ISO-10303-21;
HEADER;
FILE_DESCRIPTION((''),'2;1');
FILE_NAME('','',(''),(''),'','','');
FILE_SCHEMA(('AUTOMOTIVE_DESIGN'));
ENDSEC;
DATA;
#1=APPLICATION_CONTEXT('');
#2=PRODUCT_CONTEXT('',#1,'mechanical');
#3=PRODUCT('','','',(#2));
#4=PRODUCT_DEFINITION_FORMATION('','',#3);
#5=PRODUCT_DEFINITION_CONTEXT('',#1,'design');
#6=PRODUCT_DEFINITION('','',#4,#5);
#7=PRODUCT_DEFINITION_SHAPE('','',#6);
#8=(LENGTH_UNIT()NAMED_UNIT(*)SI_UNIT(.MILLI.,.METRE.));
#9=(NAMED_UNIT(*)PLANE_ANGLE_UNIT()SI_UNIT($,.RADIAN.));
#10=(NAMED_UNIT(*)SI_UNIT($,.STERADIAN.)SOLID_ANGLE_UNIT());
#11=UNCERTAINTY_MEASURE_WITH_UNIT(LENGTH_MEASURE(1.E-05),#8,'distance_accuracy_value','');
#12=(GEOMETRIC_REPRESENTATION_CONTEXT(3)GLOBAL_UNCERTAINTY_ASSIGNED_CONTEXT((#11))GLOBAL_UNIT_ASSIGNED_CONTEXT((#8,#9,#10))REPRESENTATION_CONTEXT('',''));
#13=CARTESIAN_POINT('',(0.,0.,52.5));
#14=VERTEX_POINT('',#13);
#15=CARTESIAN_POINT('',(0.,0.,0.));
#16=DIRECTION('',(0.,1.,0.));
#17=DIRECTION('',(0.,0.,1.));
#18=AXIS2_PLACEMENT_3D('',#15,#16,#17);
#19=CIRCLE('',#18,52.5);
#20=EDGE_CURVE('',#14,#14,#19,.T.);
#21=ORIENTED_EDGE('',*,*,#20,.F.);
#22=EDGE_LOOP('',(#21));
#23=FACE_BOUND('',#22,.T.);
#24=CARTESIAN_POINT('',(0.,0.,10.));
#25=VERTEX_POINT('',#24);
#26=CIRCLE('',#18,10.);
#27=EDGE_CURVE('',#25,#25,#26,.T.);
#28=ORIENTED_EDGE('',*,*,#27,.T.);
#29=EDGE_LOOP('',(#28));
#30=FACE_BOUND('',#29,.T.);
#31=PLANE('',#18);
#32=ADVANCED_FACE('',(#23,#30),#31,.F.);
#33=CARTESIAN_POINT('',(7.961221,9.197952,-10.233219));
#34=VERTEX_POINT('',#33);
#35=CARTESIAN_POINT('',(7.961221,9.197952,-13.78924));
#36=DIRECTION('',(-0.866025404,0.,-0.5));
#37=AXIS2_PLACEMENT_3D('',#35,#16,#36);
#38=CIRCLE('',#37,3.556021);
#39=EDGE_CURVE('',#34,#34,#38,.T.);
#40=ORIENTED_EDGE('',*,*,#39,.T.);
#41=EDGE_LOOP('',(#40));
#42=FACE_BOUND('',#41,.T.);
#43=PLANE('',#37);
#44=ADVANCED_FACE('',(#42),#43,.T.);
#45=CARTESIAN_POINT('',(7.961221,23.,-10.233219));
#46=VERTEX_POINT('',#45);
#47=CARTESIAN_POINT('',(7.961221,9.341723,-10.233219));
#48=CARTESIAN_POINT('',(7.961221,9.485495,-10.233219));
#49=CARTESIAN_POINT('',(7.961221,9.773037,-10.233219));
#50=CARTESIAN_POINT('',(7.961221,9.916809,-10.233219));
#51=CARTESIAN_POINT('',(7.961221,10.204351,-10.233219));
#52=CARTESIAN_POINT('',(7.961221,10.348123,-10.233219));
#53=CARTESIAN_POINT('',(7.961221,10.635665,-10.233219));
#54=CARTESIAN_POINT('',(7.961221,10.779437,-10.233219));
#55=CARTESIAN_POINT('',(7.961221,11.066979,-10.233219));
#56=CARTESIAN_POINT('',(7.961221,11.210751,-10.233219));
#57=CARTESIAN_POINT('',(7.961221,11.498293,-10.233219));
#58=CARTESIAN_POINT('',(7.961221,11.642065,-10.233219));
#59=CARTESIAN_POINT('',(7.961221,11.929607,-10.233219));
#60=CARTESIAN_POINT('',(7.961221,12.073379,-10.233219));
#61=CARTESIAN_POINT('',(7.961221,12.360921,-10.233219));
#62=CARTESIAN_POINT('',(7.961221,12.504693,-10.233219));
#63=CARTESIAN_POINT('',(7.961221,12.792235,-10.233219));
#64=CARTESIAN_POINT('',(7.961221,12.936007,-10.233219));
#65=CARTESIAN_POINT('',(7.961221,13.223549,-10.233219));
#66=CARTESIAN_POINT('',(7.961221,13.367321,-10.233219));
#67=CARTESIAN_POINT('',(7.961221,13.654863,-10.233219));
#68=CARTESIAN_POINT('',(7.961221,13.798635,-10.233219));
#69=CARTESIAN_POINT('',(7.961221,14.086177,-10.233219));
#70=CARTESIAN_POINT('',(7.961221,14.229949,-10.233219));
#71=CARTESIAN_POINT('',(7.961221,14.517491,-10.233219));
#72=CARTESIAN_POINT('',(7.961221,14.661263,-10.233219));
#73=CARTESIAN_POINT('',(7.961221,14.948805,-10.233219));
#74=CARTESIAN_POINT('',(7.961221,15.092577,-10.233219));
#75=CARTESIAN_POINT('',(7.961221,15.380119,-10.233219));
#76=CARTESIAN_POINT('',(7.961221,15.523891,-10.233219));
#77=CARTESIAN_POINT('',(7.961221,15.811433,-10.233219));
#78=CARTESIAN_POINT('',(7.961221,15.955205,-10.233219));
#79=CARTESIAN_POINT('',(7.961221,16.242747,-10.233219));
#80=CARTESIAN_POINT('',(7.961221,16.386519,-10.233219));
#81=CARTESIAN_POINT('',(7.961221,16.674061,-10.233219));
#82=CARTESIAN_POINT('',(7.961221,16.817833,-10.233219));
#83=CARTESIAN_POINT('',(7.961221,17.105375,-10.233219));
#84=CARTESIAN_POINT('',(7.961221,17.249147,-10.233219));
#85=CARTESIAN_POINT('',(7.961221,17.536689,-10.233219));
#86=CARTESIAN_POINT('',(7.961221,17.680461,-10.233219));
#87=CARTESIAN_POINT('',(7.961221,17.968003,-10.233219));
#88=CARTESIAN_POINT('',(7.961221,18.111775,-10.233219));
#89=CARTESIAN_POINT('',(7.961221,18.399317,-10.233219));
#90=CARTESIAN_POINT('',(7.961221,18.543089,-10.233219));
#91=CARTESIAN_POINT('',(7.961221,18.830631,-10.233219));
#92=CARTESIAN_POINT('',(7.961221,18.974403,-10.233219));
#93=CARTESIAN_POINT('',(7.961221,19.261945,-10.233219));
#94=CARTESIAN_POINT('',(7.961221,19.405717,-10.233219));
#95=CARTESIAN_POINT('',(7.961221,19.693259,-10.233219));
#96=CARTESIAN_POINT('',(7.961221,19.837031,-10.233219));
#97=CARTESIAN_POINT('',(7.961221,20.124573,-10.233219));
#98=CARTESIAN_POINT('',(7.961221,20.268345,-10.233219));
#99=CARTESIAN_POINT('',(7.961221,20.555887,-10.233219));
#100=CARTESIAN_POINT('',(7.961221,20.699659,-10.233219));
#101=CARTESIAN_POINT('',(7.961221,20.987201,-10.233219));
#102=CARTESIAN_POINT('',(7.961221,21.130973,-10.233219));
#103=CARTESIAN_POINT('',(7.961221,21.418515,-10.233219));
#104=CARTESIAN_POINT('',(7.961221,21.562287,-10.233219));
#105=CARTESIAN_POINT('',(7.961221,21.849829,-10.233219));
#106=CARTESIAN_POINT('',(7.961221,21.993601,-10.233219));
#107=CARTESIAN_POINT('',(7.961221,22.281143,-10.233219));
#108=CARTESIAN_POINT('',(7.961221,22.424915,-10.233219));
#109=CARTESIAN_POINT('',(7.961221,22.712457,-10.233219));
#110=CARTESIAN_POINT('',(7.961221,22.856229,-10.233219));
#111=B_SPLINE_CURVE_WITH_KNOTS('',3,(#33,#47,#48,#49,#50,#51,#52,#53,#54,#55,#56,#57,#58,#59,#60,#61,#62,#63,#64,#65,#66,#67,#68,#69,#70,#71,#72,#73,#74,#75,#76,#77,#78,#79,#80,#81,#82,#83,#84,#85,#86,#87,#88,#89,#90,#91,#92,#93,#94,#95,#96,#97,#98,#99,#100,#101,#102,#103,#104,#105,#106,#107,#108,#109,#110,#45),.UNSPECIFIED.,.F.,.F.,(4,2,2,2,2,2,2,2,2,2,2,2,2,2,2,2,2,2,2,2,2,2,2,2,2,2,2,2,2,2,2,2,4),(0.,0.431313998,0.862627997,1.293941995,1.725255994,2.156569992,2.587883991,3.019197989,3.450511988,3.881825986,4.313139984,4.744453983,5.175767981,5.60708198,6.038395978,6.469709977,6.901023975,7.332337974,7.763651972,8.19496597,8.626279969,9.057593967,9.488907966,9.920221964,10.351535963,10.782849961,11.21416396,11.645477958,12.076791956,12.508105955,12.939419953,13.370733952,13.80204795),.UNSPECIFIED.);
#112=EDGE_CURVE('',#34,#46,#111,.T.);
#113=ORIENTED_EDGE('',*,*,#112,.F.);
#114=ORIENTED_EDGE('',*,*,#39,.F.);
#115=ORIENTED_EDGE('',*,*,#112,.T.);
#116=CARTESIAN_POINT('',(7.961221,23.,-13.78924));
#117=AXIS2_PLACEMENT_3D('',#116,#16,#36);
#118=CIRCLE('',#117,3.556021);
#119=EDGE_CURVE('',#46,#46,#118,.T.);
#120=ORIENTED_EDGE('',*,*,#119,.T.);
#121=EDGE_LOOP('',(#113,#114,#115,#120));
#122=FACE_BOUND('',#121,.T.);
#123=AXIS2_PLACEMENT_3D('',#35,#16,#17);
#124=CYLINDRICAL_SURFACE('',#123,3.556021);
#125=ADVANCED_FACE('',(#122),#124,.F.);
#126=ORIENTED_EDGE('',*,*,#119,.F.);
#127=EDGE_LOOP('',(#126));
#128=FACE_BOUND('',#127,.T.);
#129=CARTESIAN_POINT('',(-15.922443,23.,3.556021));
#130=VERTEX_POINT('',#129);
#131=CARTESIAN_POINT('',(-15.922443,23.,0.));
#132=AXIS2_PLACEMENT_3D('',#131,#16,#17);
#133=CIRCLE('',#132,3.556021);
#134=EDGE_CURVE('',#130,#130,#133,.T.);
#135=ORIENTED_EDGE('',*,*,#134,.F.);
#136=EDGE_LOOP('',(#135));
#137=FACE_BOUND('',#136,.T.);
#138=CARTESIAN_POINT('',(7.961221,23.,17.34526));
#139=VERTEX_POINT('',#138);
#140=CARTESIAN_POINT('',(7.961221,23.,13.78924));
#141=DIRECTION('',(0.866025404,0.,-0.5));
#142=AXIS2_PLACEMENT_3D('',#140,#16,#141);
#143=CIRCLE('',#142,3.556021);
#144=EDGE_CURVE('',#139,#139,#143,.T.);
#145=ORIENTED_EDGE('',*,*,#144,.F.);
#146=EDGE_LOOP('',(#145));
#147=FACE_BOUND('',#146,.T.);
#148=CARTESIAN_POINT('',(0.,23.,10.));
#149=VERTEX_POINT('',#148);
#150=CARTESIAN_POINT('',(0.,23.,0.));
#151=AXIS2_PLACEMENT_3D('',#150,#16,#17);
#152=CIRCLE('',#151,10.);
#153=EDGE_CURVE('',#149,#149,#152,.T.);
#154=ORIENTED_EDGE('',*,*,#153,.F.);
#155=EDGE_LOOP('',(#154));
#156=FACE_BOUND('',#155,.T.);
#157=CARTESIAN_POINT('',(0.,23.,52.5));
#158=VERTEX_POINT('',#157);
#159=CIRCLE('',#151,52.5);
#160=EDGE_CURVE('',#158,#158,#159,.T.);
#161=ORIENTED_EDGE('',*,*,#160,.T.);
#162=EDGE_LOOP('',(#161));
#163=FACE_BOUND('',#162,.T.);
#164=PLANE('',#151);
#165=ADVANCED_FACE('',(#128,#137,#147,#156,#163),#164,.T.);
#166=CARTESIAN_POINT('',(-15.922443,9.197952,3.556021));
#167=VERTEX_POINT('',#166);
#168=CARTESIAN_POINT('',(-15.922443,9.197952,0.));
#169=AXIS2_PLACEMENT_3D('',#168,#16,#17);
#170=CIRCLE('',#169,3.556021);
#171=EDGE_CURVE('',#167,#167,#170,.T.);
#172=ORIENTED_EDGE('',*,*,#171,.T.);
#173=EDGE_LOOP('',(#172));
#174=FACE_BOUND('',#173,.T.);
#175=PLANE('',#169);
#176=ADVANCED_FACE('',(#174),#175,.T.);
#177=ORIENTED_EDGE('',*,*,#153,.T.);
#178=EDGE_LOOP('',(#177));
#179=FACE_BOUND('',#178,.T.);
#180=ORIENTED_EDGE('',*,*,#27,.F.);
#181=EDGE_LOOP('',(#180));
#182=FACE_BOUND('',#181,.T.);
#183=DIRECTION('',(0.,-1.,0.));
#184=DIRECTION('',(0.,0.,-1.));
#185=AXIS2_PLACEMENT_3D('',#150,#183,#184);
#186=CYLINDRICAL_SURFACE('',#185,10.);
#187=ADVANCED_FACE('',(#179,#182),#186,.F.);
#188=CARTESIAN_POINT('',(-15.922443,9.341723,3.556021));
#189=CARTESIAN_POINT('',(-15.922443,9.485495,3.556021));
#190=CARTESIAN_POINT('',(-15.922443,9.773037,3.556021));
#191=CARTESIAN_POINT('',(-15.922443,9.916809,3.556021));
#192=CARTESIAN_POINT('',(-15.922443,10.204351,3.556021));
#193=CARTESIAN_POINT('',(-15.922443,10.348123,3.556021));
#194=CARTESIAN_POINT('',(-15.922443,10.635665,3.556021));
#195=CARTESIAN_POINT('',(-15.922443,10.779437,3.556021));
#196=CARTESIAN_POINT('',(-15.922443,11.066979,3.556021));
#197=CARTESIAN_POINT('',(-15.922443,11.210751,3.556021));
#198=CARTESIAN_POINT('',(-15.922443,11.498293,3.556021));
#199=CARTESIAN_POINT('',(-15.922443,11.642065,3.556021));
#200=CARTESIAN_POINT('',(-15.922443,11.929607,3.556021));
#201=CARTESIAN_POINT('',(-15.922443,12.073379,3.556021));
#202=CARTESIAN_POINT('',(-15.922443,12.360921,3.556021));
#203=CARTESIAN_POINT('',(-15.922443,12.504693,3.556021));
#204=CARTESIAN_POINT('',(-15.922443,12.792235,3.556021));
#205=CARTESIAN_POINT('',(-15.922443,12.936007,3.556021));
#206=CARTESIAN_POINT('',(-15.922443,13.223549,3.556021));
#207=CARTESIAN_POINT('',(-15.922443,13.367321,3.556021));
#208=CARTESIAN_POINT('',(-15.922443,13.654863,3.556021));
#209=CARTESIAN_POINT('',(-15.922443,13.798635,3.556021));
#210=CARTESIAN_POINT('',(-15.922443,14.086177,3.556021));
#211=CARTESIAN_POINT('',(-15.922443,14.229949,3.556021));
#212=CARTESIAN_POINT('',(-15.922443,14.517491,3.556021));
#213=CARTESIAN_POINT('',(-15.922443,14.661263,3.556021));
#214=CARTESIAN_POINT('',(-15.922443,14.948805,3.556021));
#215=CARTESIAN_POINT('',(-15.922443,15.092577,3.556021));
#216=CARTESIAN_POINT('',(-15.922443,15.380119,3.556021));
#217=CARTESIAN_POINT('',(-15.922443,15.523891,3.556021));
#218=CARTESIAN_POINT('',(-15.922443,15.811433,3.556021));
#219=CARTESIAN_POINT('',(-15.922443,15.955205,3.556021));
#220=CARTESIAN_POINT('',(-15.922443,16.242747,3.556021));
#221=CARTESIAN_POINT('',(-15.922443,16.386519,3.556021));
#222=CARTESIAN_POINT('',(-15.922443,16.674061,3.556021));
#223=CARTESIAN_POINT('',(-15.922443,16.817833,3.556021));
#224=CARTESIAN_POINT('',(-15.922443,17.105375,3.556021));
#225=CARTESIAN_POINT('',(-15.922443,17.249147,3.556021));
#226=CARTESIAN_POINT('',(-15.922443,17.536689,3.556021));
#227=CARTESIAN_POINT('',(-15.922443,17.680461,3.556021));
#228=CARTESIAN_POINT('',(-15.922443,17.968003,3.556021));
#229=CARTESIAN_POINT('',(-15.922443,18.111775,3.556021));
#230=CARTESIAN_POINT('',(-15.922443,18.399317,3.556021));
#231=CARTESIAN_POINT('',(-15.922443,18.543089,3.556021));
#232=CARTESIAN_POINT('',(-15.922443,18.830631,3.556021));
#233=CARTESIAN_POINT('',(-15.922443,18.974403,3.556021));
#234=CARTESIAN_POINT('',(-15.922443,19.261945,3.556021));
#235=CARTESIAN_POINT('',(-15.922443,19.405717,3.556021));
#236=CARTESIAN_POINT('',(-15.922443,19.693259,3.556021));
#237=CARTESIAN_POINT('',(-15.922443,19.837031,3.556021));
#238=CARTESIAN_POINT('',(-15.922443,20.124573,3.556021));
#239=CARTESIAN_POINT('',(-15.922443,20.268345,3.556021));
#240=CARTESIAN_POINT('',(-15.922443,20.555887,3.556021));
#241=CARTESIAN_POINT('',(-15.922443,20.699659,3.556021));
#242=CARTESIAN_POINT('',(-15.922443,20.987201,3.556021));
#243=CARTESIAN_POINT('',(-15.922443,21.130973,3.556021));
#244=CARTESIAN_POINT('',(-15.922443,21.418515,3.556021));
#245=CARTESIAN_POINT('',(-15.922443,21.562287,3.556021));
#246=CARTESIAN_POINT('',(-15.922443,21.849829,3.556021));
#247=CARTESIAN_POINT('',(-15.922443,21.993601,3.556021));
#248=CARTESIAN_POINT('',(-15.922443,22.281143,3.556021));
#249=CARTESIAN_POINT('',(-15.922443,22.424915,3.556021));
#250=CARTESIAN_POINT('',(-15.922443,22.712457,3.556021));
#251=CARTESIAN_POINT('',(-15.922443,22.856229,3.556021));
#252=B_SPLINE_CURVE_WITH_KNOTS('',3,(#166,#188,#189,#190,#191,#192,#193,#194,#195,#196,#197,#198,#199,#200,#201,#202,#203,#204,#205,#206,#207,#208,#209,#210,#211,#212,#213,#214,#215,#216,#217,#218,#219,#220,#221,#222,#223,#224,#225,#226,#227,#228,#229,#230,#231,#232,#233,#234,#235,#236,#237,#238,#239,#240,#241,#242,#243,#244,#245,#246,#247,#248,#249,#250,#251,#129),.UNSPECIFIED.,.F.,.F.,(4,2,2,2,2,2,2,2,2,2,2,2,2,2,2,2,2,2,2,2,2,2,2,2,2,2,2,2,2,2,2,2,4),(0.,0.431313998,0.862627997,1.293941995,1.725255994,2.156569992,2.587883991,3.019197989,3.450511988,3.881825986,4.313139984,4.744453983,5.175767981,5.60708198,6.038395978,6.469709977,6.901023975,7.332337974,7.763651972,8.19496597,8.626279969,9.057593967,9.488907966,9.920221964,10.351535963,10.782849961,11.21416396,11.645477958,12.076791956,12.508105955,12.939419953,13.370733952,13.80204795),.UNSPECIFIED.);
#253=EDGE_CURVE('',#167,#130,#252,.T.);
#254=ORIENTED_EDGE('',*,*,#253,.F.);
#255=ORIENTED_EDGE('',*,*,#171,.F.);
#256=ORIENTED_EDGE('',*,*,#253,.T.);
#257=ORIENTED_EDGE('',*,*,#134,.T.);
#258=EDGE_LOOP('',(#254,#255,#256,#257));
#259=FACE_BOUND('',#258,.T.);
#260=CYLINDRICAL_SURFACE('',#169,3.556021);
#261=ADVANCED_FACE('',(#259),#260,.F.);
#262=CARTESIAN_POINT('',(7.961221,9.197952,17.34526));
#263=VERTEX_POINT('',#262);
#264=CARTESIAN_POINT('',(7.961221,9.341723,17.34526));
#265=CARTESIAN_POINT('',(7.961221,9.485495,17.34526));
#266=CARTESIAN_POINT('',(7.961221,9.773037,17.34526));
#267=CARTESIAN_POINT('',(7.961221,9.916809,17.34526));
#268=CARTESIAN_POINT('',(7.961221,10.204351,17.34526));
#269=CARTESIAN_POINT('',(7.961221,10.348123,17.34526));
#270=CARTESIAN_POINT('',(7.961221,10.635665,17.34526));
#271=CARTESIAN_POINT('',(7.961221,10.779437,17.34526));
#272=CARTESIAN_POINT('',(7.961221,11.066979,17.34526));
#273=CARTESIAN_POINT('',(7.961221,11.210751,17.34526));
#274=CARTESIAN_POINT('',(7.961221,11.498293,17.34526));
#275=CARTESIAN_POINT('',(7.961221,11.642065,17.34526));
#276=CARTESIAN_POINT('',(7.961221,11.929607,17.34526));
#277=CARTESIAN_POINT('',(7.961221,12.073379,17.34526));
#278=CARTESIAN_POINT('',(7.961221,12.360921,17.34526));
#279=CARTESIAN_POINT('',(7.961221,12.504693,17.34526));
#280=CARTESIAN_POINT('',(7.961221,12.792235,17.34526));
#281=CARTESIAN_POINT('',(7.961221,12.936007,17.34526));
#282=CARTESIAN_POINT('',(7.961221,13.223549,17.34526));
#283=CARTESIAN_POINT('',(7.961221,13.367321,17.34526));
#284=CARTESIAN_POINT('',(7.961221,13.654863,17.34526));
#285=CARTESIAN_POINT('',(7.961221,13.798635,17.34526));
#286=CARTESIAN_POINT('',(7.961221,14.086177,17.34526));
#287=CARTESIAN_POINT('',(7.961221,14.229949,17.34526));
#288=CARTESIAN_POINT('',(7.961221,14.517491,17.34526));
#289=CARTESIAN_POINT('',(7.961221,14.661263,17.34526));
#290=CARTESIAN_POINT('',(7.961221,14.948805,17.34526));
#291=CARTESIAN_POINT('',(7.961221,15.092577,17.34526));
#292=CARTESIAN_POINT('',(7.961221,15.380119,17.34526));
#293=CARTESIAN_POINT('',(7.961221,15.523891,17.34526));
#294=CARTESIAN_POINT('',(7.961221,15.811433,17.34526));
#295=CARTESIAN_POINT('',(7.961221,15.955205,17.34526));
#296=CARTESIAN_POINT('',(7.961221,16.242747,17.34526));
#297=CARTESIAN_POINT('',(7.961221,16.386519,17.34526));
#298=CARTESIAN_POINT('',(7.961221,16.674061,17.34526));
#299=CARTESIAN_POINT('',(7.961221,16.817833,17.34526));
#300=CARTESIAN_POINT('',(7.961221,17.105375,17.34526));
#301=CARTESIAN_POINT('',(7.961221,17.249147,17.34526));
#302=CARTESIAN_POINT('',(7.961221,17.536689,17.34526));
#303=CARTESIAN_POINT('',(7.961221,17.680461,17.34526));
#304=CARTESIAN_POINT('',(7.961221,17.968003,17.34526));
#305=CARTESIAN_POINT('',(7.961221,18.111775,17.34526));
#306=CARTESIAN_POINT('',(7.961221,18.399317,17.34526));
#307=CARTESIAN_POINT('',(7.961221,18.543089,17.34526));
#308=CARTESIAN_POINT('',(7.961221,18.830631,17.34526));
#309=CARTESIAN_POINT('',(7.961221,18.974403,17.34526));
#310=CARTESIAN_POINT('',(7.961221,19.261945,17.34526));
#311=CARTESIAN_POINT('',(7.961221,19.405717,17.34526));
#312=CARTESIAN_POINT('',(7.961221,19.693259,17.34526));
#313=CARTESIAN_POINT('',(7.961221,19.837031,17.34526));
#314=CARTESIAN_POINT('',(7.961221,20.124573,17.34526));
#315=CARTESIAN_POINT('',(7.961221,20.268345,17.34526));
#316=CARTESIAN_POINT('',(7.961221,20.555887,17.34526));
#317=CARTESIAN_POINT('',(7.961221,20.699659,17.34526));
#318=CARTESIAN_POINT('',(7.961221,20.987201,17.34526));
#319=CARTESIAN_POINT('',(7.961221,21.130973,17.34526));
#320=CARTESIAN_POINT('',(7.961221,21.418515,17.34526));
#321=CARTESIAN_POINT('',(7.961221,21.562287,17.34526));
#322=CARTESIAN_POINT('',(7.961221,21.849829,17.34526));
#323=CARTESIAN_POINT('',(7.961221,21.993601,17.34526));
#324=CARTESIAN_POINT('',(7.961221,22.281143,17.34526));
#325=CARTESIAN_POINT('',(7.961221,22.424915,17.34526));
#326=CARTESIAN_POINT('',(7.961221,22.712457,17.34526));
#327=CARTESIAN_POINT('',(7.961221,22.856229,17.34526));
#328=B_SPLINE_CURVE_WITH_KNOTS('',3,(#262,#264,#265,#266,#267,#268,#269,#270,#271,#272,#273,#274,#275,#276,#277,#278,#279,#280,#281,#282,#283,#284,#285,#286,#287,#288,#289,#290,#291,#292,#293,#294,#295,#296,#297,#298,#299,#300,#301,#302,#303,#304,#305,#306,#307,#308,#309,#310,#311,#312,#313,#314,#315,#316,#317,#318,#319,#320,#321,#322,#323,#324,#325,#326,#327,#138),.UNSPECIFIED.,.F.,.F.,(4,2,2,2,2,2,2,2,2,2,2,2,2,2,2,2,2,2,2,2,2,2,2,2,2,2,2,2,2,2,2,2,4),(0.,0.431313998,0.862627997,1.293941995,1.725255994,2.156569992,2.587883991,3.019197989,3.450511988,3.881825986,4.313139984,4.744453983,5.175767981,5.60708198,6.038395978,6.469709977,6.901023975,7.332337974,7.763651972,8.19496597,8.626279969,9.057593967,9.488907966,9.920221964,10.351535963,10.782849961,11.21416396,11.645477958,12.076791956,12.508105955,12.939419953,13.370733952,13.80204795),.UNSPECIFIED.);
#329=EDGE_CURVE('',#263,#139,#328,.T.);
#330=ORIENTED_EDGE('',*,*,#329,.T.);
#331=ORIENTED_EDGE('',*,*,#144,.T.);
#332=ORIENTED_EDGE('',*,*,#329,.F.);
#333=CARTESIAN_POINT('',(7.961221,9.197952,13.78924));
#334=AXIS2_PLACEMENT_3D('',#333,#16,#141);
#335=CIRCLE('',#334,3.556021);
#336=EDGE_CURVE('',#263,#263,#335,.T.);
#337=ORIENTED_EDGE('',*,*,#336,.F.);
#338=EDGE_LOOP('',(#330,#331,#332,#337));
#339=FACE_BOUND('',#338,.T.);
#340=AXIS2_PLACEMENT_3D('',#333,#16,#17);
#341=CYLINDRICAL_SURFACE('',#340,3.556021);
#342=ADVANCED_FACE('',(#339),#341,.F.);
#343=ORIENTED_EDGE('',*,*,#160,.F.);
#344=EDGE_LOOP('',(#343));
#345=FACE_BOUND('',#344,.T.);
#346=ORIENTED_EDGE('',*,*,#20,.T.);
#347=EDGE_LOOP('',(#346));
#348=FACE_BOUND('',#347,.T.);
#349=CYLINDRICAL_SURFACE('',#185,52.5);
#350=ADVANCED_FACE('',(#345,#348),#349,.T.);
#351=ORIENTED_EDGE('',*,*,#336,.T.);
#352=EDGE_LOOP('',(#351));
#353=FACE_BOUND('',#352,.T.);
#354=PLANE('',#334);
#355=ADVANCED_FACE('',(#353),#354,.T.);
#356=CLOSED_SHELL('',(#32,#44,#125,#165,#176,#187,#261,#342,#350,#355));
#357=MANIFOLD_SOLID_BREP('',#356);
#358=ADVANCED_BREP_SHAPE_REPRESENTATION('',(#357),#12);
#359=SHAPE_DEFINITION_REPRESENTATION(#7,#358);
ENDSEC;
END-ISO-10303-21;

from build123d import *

# Parameters (mm, degrees)
SKETCH1_R           = 52.5
BOSS_EXTRUDE1_DEPTH = 23
SKETCH2_R           = 10
CUT_EXTRUDE1_DEPTH  = 78.727086656
SKETCH3_R           = 3.556020506
CUT_EXTRUDE2_DEPTH  = 13.80204795
CIRPATTERN1_COUNT   = 3


with BuildPart() as part:
    # Sketch1 → Boss-Extrude1 (new body)
    with BuildSketch(Plane(origin=(0, 0, 0), x_dir=(1, 0, 0), z_dir=(0, 1, 0))):
        Circle(SKETCH1_R)
    extrude(amount=BOSS_EXTRUDE1_DEPTH)

    # Sketch2 → Cut-Extrude1 (cut, through all)
    with BuildSketch(Plane(origin=(0, 0, 0), x_dir=(1, 0, 0), z_dir=(0, 1, 0))):
        Circle(SKETCH2_R)
    extrude(amount=CUT_EXTRUDE1_DEPTH, mode=Mode.SUBTRACT)

    # Sketch3 → Cut-Extrude2 (cut)
    with BuildSketch(Plane(origin=(0, 23, 0), x_dir=(1, 0, 0), z_dir=(0, 1, 0))):
        with Locations((-15.922442836, 0)):
            Circle(SKETCH3_R)
    cut_extrude2 = extrude(amount=-CUT_EXTRUDE2_DEPTH, mode=Mode.SUBTRACT)

    # CirPattern1: Cut-Extrude2 ×3 about axis
    cirpattern1_axis = Axis((0, 0, 0), (0, 1, 0))
    for i in range(1, CIRPATTERN1_COUNT):
        add(cut_extrude2.rotate(cirpattern1_axis, i * 360 / CIRPATTERN1_COUNT), mode=Mode.SUBTRACT)


solid = part.part
